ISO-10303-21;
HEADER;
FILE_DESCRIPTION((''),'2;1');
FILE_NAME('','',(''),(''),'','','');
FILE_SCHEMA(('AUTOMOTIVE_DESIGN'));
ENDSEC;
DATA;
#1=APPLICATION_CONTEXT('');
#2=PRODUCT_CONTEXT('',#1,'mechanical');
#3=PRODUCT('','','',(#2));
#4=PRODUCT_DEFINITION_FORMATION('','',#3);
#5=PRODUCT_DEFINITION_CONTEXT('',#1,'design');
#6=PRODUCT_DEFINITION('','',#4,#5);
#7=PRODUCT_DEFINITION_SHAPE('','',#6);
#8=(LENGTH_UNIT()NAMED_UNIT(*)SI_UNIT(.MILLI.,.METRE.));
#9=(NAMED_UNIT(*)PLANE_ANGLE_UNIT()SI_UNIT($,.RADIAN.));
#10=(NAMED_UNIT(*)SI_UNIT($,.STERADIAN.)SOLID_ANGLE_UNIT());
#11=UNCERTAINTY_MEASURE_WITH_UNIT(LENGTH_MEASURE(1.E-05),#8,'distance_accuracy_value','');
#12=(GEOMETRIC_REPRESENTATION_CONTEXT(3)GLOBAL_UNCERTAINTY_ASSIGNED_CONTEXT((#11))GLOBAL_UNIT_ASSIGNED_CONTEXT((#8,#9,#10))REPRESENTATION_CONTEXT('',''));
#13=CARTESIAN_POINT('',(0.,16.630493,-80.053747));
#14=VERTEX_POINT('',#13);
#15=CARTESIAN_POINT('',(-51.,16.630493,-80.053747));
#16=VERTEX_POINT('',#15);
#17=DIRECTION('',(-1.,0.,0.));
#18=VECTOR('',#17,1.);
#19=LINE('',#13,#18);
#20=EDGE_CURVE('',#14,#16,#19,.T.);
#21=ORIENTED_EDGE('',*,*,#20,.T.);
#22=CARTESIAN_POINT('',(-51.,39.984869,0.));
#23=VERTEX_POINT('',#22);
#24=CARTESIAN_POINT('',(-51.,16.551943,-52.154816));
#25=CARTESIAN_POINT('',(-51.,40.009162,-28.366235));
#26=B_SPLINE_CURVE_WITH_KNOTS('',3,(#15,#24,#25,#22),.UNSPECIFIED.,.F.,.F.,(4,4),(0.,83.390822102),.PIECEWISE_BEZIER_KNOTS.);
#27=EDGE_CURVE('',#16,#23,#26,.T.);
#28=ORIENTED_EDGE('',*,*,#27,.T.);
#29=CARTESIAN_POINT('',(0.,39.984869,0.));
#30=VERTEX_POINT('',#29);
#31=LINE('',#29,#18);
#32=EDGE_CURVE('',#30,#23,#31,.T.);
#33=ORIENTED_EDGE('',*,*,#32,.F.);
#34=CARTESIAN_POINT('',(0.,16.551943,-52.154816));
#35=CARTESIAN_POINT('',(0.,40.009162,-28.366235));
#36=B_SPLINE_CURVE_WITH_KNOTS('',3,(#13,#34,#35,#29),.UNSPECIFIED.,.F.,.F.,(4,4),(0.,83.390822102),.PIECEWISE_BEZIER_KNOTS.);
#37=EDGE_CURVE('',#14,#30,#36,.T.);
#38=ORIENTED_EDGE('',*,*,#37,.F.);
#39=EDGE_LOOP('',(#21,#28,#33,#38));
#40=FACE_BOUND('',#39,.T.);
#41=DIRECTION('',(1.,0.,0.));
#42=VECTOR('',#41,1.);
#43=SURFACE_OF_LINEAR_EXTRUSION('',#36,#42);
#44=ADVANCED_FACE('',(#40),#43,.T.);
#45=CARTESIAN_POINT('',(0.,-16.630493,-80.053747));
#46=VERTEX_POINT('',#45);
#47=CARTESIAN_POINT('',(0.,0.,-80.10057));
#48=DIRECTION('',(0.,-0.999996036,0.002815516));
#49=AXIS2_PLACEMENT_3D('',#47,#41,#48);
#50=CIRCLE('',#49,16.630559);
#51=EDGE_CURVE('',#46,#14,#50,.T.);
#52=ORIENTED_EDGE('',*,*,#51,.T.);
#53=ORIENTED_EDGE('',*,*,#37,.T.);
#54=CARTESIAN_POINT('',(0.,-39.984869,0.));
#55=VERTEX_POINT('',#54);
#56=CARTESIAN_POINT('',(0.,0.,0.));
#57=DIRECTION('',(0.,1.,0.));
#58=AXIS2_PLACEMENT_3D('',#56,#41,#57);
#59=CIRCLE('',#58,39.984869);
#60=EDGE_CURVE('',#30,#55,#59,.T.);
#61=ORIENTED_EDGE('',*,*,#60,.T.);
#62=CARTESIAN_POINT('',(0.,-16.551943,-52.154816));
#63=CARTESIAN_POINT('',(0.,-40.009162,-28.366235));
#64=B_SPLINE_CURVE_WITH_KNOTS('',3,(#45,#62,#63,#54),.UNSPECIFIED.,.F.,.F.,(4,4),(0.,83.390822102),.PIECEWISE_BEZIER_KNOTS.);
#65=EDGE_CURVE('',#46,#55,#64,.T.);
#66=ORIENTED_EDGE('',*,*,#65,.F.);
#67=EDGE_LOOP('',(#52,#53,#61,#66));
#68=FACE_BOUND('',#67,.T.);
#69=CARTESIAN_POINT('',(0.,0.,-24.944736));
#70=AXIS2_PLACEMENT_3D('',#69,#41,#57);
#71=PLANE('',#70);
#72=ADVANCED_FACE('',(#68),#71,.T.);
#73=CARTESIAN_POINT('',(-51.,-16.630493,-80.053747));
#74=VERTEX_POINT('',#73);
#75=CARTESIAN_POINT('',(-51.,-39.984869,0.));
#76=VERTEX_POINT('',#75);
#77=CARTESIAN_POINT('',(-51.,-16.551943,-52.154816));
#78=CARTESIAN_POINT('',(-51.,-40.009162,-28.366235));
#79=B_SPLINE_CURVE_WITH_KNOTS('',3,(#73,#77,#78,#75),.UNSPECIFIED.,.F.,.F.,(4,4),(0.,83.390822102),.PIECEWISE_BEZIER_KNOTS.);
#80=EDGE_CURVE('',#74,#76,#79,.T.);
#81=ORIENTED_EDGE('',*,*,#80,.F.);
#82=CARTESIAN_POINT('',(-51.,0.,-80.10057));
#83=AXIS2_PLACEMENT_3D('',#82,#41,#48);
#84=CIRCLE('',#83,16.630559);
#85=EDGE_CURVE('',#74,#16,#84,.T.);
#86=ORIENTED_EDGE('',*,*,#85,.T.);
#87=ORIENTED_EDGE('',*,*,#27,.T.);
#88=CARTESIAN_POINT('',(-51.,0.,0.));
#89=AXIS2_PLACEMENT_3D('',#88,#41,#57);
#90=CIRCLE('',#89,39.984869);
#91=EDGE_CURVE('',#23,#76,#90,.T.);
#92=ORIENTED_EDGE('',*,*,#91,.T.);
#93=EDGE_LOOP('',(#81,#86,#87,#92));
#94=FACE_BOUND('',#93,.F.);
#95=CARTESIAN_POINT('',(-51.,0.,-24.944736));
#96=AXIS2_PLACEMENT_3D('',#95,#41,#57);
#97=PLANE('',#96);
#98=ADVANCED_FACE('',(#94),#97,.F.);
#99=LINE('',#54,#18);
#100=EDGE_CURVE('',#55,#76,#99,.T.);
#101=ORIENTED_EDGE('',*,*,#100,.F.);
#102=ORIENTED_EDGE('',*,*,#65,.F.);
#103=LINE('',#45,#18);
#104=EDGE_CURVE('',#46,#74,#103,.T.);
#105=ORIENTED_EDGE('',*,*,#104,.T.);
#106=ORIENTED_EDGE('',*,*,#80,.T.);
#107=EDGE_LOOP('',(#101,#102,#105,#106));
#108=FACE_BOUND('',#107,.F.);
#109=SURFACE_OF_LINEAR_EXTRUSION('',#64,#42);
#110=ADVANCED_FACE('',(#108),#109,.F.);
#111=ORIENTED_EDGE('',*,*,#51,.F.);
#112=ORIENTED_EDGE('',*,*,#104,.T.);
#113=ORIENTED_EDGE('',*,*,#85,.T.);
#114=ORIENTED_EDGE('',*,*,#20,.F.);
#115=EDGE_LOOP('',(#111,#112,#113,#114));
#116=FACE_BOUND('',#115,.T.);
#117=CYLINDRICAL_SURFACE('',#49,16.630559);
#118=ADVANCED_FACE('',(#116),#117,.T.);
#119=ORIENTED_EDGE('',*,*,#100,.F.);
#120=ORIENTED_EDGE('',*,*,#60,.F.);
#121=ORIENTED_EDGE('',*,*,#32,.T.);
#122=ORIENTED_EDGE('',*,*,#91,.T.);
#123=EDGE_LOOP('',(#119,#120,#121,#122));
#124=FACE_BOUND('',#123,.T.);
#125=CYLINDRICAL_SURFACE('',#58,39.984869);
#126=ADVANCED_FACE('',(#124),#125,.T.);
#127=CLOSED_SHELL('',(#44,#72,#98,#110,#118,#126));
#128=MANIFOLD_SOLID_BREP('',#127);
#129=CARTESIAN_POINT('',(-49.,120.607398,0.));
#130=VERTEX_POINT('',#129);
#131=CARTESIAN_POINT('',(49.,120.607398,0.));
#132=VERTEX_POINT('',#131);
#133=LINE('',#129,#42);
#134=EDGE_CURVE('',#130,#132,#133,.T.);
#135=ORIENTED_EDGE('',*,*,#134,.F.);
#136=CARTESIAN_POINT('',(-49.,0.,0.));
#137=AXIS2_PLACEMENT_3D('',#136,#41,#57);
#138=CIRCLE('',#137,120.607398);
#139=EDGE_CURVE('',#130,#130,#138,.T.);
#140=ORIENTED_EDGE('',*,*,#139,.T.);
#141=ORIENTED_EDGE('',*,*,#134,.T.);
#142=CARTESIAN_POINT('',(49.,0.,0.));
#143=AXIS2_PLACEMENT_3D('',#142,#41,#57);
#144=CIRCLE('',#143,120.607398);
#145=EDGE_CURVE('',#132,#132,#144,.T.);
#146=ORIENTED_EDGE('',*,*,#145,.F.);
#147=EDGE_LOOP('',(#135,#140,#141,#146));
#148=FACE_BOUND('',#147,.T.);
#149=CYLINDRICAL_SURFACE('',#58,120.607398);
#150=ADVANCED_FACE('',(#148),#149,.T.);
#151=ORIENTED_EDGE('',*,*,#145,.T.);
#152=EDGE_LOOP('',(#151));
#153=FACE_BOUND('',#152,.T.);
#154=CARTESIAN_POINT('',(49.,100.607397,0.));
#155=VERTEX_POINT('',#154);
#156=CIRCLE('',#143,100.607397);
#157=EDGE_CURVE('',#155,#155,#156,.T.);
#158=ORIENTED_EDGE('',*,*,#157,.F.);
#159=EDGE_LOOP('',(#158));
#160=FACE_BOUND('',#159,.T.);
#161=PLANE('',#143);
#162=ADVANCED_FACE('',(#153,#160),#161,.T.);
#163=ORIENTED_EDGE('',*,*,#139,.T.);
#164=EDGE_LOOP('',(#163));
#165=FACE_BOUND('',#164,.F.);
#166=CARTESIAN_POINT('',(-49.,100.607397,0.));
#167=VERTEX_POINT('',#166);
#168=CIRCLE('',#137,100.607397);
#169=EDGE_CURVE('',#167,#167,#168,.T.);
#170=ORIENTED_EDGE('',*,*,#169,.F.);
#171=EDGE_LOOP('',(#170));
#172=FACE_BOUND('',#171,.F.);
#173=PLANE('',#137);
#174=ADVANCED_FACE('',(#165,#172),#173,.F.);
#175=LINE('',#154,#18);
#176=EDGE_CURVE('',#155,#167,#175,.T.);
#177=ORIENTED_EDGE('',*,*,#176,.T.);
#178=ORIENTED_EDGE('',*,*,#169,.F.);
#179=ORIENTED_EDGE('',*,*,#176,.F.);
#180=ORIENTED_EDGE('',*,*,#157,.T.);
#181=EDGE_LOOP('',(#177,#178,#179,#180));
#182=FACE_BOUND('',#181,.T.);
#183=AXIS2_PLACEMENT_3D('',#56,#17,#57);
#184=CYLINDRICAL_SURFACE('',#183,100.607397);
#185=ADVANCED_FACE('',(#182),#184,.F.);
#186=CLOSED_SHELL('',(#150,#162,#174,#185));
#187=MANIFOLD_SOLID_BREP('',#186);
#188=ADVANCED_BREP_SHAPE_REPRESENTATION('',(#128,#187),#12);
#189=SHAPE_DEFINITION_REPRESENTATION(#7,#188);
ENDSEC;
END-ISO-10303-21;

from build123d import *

# Parameters (mm, degrees)
F0_R     = 22.8209931427
F1_DEPTH = 34.544
F3_DEPTH = 51
F4_R     = 120.6073984504
F4_R_2   = 100.607397247
F5_DEPTH = 49


with BuildPart() as f1:
    # F0 (on Right) → F1 (new body)
    with BuildSketch(Plane.YZ):
        Circle(F0_R)
    extrude(amount=-F1_DEPTH)

    # F2 (on face) → F3 (join)
    with BuildSketch(Plane.YZ):
        with BuildLine():
            add(Edge.make_bspline(
                [(16.6304931045, -80.0537467003), (16.5519428961, -52.1548158816), (40.0091622509, -28.3662351914), (39.9848685014, 0)],
                knots=[0, 0, 0, 0, 83.3908221025, 83.3908221025, 83.3908221025, 83.3908221025], degree=3))
            ThreePointArc((39.9848685014, 0), (0, 39.9848685014), (-39.9848685014, 0))
            add(Edge.make_bspline(
                [(-16.6304931045, -80.0537467003), (-16.5519428961, -52.1548158816), (-40.0091622509, -28.3662351914), (-39.9848685014, 0)],
                knots=[0, 0, 0, 0, 83.3908221025, 83.3908221025, 83.3908221025, 83.3908221025], degree=3))
            ThreePointArc((-16.6304931045, -80.0537467003), (0, -96.7311293327), (16.6304931045, -80.0537467003))
        make_face()
    extrude(amount=-F3_DEPTH)


with BuildPart() as f5:
    # F4 (on face) → F5 (new body, symmetric)
    with BuildSketch(Plane.YZ):
        Circle(F4_R)
        Circle(F4_R_2, mode=Mode.SUBTRACT)
    extrude(amount=F5_DEPTH, both=True)


solid = Compound([f1.part, f5.part])
